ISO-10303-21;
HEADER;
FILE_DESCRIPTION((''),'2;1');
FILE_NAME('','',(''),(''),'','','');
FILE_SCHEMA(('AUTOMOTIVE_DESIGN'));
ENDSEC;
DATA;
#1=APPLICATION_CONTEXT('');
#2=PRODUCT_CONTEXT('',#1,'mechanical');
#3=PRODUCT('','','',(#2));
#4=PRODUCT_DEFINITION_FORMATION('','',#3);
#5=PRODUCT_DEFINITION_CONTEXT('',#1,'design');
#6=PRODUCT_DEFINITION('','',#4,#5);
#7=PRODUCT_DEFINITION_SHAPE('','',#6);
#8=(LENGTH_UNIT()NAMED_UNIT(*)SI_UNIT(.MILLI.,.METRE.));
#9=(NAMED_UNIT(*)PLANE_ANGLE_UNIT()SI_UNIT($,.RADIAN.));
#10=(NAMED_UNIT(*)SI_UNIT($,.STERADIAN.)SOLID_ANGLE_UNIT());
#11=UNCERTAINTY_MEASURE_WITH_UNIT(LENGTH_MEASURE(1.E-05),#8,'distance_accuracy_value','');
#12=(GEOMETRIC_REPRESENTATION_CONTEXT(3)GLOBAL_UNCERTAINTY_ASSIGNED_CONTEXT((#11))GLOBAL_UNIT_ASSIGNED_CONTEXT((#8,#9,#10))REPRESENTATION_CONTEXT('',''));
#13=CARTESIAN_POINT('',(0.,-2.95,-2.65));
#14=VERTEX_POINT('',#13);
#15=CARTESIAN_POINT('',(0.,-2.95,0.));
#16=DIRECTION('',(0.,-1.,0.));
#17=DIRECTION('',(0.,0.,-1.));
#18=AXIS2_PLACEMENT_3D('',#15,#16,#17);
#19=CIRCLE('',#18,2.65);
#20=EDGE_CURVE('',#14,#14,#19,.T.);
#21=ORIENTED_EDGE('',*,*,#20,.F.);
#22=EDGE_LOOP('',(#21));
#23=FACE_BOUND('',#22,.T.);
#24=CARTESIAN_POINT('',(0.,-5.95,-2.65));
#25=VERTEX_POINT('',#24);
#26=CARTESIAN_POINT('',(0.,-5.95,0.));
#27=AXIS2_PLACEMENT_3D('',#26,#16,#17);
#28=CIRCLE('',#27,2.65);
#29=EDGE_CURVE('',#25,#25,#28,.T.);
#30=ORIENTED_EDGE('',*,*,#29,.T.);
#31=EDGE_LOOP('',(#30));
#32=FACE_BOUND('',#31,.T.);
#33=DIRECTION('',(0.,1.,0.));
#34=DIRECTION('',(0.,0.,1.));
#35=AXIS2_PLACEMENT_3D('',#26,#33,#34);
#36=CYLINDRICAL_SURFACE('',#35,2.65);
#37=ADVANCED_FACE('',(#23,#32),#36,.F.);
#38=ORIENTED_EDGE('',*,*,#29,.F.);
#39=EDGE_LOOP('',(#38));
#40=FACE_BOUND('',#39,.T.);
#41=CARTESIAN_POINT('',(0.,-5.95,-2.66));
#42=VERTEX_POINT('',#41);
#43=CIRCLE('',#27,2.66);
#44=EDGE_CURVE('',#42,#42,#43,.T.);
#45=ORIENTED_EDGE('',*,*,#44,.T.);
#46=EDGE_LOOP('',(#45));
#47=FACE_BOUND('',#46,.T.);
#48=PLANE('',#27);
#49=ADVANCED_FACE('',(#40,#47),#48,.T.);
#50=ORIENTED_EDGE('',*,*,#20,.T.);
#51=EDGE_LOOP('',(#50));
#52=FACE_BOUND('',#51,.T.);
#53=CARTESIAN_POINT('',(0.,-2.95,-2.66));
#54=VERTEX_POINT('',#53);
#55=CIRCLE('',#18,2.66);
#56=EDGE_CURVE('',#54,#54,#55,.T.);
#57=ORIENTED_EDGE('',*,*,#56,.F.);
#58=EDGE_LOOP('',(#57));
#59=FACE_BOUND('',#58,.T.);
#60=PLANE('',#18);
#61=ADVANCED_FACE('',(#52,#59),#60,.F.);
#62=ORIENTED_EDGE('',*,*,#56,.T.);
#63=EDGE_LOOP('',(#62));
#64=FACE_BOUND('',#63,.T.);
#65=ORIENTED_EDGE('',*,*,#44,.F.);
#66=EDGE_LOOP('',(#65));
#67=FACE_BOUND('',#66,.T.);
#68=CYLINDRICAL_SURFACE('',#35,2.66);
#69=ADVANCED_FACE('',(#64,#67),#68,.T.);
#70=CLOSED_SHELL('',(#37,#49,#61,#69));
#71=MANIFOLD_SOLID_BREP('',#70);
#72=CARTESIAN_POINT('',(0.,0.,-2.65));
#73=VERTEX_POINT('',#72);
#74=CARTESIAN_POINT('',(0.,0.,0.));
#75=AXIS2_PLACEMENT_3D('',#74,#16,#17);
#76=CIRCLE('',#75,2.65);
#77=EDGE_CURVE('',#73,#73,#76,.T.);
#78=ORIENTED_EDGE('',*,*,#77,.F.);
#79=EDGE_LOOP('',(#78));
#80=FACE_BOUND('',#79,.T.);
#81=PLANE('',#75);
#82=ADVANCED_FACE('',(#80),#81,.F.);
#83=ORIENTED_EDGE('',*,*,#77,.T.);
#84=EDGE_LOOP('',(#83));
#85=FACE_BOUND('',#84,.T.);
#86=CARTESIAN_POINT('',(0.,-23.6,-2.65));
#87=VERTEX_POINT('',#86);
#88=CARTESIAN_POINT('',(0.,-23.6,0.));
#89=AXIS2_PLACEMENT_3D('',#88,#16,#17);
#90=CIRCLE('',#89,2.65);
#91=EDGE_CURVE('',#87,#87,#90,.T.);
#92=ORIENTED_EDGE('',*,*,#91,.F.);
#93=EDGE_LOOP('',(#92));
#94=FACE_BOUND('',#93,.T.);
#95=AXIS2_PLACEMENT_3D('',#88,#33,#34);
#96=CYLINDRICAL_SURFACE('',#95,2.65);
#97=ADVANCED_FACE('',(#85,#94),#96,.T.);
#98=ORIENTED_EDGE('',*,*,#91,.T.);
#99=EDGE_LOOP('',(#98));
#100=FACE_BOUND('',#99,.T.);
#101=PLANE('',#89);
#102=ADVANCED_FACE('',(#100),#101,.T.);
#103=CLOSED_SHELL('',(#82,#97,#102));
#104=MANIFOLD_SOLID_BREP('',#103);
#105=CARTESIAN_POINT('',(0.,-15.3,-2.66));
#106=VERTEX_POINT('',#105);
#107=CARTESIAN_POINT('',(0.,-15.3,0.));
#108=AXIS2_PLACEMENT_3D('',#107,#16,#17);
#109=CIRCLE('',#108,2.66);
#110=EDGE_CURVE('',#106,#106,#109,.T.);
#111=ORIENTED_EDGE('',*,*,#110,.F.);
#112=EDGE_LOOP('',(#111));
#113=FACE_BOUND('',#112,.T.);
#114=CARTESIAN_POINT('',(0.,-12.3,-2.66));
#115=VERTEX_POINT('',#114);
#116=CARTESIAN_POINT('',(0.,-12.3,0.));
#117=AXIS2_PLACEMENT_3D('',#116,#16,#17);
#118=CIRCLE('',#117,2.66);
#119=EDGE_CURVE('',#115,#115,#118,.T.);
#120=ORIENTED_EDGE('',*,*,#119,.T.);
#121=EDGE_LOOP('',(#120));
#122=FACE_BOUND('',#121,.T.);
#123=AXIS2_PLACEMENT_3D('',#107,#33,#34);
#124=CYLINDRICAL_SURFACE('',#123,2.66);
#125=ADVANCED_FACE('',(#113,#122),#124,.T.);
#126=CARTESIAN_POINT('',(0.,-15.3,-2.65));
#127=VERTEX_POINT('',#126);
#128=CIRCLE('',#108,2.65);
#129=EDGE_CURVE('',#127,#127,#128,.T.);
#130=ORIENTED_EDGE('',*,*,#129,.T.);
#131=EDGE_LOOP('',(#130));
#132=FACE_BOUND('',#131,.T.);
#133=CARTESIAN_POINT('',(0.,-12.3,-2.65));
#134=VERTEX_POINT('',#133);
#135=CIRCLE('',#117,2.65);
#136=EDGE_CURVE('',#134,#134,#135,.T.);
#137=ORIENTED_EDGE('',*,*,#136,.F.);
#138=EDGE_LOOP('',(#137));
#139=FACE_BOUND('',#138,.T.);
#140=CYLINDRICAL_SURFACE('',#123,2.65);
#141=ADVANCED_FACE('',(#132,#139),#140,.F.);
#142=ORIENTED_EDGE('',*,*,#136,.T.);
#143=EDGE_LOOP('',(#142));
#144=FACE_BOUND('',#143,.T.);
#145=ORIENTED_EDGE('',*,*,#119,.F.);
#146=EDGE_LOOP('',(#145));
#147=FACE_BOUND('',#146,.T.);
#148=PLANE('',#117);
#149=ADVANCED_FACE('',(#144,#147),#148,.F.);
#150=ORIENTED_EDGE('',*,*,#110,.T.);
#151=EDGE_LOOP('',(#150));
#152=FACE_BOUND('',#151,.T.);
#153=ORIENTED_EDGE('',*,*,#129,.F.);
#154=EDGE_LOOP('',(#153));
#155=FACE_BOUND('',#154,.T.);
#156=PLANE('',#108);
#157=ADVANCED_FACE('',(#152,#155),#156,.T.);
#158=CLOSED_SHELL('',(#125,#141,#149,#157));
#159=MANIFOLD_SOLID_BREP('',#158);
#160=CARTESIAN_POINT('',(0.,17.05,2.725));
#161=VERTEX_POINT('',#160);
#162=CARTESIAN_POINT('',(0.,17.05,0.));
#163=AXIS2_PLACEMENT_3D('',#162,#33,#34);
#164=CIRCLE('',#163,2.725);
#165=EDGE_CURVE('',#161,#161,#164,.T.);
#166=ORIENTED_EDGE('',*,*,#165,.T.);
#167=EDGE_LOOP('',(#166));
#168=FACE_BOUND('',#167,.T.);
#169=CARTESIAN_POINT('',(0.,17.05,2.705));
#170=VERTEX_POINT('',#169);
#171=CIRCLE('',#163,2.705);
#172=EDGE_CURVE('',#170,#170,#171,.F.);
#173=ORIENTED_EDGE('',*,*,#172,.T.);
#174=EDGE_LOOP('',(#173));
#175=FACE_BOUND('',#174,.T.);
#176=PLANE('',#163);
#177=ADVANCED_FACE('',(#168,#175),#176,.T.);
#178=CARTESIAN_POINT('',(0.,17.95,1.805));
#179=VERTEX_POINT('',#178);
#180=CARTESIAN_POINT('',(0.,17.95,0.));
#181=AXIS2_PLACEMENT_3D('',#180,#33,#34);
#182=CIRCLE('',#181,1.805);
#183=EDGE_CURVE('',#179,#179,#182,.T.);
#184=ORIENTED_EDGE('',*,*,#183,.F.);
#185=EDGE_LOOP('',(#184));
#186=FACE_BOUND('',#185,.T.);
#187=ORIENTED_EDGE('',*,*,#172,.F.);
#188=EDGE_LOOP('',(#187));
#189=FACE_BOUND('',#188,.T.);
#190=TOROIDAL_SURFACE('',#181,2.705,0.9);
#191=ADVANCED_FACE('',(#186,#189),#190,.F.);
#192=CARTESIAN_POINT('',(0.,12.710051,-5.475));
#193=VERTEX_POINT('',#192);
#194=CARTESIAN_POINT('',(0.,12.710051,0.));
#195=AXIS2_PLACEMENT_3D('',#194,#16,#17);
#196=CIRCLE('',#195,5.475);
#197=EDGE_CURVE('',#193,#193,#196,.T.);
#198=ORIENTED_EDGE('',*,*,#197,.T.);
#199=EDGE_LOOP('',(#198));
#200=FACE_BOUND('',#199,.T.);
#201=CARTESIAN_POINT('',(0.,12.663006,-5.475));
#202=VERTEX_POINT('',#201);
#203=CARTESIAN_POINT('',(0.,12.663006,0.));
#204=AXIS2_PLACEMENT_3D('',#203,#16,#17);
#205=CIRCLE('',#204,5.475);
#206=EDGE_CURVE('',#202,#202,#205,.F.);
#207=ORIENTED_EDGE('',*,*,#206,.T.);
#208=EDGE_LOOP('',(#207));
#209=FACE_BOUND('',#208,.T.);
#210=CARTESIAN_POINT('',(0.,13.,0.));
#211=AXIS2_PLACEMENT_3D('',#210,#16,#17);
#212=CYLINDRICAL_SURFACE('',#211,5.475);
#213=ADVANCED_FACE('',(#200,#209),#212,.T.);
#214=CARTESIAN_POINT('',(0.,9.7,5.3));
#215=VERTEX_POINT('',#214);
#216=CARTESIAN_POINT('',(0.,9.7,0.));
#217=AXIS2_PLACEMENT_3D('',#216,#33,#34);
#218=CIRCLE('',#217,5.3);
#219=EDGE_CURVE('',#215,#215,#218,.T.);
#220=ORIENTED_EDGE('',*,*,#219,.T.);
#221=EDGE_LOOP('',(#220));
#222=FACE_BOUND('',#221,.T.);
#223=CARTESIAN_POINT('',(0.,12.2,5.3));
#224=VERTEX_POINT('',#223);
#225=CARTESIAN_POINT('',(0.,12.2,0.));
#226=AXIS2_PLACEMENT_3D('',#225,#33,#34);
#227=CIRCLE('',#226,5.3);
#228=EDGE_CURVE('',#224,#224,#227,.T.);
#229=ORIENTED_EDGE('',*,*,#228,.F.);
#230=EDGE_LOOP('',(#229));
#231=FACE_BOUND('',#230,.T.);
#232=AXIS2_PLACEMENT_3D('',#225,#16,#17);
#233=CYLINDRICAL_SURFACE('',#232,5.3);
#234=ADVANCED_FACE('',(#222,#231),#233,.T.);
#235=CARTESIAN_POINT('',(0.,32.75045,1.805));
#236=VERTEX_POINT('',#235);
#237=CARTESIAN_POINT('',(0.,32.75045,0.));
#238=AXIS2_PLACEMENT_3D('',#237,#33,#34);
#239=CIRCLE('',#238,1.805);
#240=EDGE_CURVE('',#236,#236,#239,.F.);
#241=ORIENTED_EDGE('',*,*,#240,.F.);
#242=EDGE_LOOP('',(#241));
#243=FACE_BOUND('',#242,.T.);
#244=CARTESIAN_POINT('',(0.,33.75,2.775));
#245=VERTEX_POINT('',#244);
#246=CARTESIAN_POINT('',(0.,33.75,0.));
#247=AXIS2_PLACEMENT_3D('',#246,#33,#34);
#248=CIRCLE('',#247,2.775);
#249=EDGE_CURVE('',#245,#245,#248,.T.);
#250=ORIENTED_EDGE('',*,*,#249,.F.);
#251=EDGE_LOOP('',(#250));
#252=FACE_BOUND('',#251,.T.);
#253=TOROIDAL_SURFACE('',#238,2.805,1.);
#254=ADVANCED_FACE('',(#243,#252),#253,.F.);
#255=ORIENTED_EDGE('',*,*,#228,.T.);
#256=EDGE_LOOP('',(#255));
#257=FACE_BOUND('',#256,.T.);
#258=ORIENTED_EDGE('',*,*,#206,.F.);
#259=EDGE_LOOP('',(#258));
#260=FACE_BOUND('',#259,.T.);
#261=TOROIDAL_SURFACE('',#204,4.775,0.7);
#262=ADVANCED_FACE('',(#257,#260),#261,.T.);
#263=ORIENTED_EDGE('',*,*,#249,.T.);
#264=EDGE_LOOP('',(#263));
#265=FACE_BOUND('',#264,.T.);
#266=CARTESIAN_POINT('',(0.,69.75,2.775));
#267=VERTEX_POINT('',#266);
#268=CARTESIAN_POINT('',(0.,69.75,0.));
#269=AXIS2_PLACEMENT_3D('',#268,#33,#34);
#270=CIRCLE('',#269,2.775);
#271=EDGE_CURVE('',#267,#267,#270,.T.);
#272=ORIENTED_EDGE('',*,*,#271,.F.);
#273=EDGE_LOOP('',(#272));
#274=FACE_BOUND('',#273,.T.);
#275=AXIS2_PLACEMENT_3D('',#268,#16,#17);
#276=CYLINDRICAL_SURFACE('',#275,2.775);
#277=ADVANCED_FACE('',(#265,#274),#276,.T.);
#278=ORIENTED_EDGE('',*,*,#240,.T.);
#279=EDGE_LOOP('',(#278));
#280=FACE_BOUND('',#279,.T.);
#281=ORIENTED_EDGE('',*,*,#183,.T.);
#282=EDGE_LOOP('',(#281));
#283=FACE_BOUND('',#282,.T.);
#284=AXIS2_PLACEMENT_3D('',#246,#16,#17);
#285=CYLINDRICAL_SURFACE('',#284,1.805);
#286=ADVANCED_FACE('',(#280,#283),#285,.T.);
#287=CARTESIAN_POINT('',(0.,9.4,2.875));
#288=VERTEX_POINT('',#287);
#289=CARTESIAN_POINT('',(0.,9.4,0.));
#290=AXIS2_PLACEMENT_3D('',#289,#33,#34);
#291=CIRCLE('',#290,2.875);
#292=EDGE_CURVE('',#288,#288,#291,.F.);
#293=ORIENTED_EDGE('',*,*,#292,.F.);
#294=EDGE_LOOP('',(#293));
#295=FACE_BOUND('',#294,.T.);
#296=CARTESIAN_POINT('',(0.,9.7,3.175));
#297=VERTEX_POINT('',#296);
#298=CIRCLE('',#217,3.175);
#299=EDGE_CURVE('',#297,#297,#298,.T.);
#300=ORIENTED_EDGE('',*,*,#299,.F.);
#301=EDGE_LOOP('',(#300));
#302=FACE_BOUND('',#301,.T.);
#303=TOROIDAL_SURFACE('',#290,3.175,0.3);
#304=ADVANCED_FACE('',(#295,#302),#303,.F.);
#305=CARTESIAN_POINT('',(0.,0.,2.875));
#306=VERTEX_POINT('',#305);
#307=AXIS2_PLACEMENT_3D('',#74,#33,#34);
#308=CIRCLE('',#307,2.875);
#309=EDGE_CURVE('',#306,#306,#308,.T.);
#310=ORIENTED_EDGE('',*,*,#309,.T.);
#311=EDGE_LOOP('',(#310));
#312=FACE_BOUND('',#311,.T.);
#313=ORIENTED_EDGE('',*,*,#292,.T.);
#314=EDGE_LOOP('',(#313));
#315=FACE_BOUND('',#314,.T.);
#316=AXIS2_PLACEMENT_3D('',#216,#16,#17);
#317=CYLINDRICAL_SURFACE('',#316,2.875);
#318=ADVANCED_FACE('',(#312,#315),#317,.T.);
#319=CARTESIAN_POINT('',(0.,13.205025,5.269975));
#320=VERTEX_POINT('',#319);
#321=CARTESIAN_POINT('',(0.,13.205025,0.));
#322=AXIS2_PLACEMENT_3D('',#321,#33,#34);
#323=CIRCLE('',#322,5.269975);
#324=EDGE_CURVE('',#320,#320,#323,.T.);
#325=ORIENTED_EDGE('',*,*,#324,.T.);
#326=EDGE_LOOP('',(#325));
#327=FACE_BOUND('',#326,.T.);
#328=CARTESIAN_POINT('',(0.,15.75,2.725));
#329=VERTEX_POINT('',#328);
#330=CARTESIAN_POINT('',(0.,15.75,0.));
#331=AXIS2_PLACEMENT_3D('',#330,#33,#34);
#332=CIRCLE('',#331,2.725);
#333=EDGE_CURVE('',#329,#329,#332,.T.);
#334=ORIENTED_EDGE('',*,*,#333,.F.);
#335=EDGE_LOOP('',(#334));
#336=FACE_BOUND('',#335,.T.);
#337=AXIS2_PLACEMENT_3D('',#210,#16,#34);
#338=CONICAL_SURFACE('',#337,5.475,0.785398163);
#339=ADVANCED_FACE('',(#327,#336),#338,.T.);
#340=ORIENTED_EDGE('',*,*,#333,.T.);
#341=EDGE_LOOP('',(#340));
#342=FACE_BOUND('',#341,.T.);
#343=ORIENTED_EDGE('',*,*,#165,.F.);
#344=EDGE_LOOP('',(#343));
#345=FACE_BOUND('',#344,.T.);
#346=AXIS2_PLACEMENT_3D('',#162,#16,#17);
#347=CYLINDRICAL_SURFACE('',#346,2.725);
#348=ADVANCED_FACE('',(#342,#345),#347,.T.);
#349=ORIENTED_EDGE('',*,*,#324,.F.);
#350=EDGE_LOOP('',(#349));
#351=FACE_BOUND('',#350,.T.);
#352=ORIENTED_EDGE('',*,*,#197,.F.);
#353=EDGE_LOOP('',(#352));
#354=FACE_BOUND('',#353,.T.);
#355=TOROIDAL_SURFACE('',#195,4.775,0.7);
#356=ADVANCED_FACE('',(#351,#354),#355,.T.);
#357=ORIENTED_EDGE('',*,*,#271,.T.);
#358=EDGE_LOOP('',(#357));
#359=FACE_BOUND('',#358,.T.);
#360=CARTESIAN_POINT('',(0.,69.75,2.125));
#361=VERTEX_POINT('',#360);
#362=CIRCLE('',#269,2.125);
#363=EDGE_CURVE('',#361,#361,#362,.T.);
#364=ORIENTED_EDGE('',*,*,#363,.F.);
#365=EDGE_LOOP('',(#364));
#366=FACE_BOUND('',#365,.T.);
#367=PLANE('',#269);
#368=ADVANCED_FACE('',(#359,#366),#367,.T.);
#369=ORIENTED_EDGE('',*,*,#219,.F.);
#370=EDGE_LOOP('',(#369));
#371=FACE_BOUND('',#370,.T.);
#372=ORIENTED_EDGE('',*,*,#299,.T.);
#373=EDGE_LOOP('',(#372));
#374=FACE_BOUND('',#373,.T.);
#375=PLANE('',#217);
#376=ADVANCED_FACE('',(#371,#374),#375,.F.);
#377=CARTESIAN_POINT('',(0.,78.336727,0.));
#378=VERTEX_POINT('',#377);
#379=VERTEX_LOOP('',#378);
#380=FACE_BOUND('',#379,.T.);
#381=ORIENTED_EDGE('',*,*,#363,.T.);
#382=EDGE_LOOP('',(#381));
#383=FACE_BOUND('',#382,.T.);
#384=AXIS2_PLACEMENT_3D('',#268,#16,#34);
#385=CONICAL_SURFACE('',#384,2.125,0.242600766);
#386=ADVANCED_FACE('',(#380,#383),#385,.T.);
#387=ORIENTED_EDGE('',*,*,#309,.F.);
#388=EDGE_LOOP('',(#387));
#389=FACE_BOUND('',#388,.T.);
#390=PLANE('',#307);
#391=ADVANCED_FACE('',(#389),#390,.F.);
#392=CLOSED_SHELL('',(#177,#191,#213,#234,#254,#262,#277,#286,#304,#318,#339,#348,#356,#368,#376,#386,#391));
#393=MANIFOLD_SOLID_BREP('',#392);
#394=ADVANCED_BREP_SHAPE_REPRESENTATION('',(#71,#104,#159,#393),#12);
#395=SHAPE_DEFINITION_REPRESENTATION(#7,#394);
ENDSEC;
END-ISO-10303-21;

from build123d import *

# Parameters (mm, degrees)
SKETCH1_R            = 2.875
BOSS_EXTRUDE1_DEPTH  = 9.7
SKETCH2_R            = 5.3
BOSS_EXTRUDE2_DEPTH  = 2.5
SKETCH3_R            = 5.475
BOSS_EXTRUDE3_DEPTH  = 0.8
SKETCH4_R            = 5.475
BOSS_EXTRUDE4_DEPTH  = 2.75
BOSS_EXTRUDE4_TAPER  = 45
SKETCH5_R            = 2.725
BOSS_EXTRUDE5_DEPTH  = 1.3
SKETCH6_R            = 1.805
BOSS_EXTRUDE6_DEPTH  = 16.7
SKETCH7_R            = 2.775
BOSS_EXTRUDE7_DEPTH  = 36
SKETCH9_R            = 2.65
BOSS_EXTRUDE9_DEPTH  = 23.6
SKETCH10_R           = 2.66
SKETCH10_R_2         = 2.65
BOSS_EXTRUDE10_DEPTH = 3
SKETCH12_R           = 2.66
SKETCH12_R_2         = 2.65
BOSS_EXTRUDE11_DEPTH = 3
FILLET1_R            = 0.7
FILLET2_R            = 0.9
FILLET3_R            = 1
FILLET4_R            = 0.3


with BuildPart() as part:
    # Sketch1 → Boss-Extrude1 (new body)
    with BuildSketch(Plane(origin=(0, 0, 0), x_dir=(1, 0, 0), z_dir=(0, 1, 0))):
        with Locations(Location((0, 0, 0), (0, 0, 270))):
            Circle(SKETCH1_R)
    extrude(amount=BOSS_EXTRUDE1_DEPTH)

    # Sketch2 → Boss-Extrude2 (add)
    with BuildSketch(Plane(origin=(0, 9.7, 0), x_dir=(1, 0, 0), z_dir=(0, 1, 0))):
        with Locations(Location((0, 0, 0), (0, 0, 270))):
            Circle(SKETCH2_R)
    extrude(amount=BOSS_EXTRUDE2_DEPTH)

    # Sketch3 → Boss-Extrude3 (add)
    with BuildSketch(Plane(origin=(0, 12.2, 0), x_dir=(1, 0, 0), z_dir=(0, 1, 0))):
        with Locations(Location((0, 0, 0), (0, 0, 270))):
            Circle(SKETCH3_R)
    extrude(amount=BOSS_EXTRUDE3_DEPTH)

    # Sketch4 → Boss-Extrude4 (add)
    with BuildSketch(Plane(origin=(0, 13, 0), x_dir=(1, 0, 0), z_dir=(0, 1, 0))):
        with Locations(Location((0, 0, 0), (0, 0, 270))):
            Circle(SKETCH4_R)
    extrude(amount=BOSS_EXTRUDE4_DEPTH, taper=BOSS_EXTRUDE4_TAPER)

    # Sketch5 → Boss-Extrude5 (add)
    with BuildSketch(Plane(origin=(0, 15.75, 0), x_dir=(1, 0, 0), z_dir=(0, 1, 0))):
        with Locations(Location((0, 0, 0), (0, 0, 270))):
            Circle(SKETCH5_R)
    extrude(amount=BOSS_EXTRUDE5_DEPTH)

    # Sketch6 → Boss-Extrude6 (add)
    with BuildSketch(Plane(origin=(0, 17.05, 0), x_dir=(1, 0, 0), z_dir=(0, 1, 0))):
        with Locations(Location((0, 0, 0), (0, 0, 270))):
            Circle(SKETCH6_R)
    extrude(amount=BOSS_EXTRUDE6_DEPTH)

    # Sketch7 → Boss-Extrude7 (add)
    with BuildSketch(Plane(origin=(0, 33.75, 0), x_dir=(1, 0, 0), z_dir=(0, 1, 0))):
        with Locations(Location((0, 0, 0), (0, 0, 270))):
            Circle(SKETCH7_R)
    extrude(amount=BOSS_EXTRUDE7_DEPTH)

    # Boss-Extrude8 cone 1 section (through the dimple's axis) → Boss-Extrude8 (revolve)
    with BuildSketch(Plane(origin=(0, 69.75, 0), x_dir=(0, 0, -1), z_dir=(1, 0, 0))):
        Polygon((0, 0), (2.125, 0), (0, 8.586726604), align=None)
    revolve(axis=Axis((0, 69.75, 0), (0, 1, 0)))

    # Fillet1
    # the kernel refuses this fillet: 0.7 mm, written as the material it takes off along each edge
    with BuildSketch(Plane(origin=(0, 12.2, 0), x_dir=(0, 0, 1), z_dir=(-1, 0, 0))) as fillet1_piece_1:
        with BuildLine():
            CenterArc((4.775, 0.463006479), FILLET1_R, 318.590377891, 41.409622109)
            Line((5.3, 0), (5.3105, -0.00926013))
            ThreePointArc((5.3105, -0.00926013), (5.3875, -0.014), (5.475, -0.014))
            Line((5.475, -0.014), (5.489, 0))
            Line((5.489, 0), (5.489, 0.463006479))
            Line((5.489, 0.463006479), (5.475, 0.463006479))
        make_face()
    revolve(axis=Axis((0, 12.2, 0), (0, 1, 0)), mode=Mode.SUBTRACT)
    with BuildSketch(Plane(origin=(0, 13, 0), x_dir=(0, 0, 1), z_dir=(-1, 0, 0))) as fillet1_piece_2:
        with BuildLine():
            CenterArc((5.475 - FILLET1_R, -FILLET1_R * 0.414213562373), FILLET1_R, 0, 45)
            Line((5.475, -FILLET1_R * 0.414213562373), (5.475 + FILLET1_R * 0.02, -FILLET1_R * 0.414213562373))
            Line((5.475 + FILLET1_R * 0.02, -FILLET1_R * 0.414213562373), (5.475 + FILLET1_R * 0.02, FILLET1_R * 0.00828427124746))
            Line((5.475 + FILLET1_R * 0.02, FILLET1_R * 0.00828427124746), (5.475 - FILLET1_R * 0.27875108319, FILLET1_R * 0.307035354437))
            Line((5.475 - FILLET1_R * 0.27875108319, FILLET1_R * 0.307035354437), (5.475 - FILLET1_R * 0.292893218813, FILLET1_R * 0.292893218813))
        make_face()
    revolve(axis=Axis((0, 13, 0), (0, 1, 0)), mode=Mode.SUBTRACT)

    # Fillet2
    fillet2_edges = [part.edges().sort_by_distance(p)[0] for p in [
        (0, 17.05, -1.805),
    ]]
    fillet(fillet2_edges, radius=FILLET2_R)

    # Fillet3
    # the kernel refuses this fillet: 1 mm, written as the material it adds along each edge
    with BuildSketch(Plane(origin=(0, 33.75, 0), x_dir=(0, 0, 1), z_dir=(-1, 0, 0))) as fillet3_piece_1_section:
        with BuildLine():
            CenterArc((1.805 + FILLET3_R, -FILLET3_R), FILLET3_R, 90, 90)
            Line((1.805 + FILLET3_R, 0), (1.805, 0))
            Line((1.805, 0), (1.805, -FILLET3_R))
        make_face()
    fillet3_piece_1 = revolve(axis=Axis((0, 33.75, 0), (0, 1, 0)), mode=Mode.PRIVATE)
    fillet3_piece_1 = fillet3_piece_1 & Plane(origin=(0, 33.456728923, 0), x_dir=(0, 0, 1), z_dir=(0, -1, 0)) * Cylinder(2.775, 12, mode=Mode.PRIVATE)
    add(fillet3_piece_1)

    # Fillet4
    fillet4_edges = [part.edges().sort_by_distance(p)[0] for p in [
        (0, 9.7, -2.875),
    ]]
    fillet(fillet4_edges, radius=FILLET4_R)


with BuildPart() as body_2:
    # Sketch9 → Boss-Extrude9 (new body)
    with BuildSketch(Plane.XZ):
        with Locations(Location((0, 0, 0), (0, 0, 270))):
            Circle(SKETCH9_R)
    extrude(amount=BOSS_EXTRUDE9_DEPTH)


with BuildPart() as body_3:
    # Sketch10 → Boss-Extrude10 (new body)
    with BuildSketch(Plane(origin=(0, -2.95, 0), x_dir=(-1, 0, 0), z_dir=(0, -1, 0))):
        with Locations(Location((0, 0, 0), (0, 0, 90))):
            Circle(SKETCH10_R)
        with Locations(Location((0, 0, 0), (0, 0, 90))):
            Circle(SKETCH10_R_2, mode=Mode.SUBTRACT)
    extrude(amount=BOSS_EXTRUDE10_DEPTH)


with BuildPart() as body_4:
    # Sketch12 → Boss-Extrude11 (new body)
    with BuildSketch(Plane(origin=(0, -12.3, 0), x_dir=(-1, 0, 0), z_dir=(0, -1, 0))):
        with Locations(Location((0, 0, 0), (0, 0, 90))):
            Circle(SKETCH12_R)
        with Locations(Location((0, 0, 0), (0, 0, 90))):
            Circle(SKETCH12_R_2, mode=Mode.SUBTRACT)
    extrude(amount=BOSS_EXTRUDE11_DEPTH)


solid = Compound([part.part, body_2.part, body_3.part, body_4.part])
